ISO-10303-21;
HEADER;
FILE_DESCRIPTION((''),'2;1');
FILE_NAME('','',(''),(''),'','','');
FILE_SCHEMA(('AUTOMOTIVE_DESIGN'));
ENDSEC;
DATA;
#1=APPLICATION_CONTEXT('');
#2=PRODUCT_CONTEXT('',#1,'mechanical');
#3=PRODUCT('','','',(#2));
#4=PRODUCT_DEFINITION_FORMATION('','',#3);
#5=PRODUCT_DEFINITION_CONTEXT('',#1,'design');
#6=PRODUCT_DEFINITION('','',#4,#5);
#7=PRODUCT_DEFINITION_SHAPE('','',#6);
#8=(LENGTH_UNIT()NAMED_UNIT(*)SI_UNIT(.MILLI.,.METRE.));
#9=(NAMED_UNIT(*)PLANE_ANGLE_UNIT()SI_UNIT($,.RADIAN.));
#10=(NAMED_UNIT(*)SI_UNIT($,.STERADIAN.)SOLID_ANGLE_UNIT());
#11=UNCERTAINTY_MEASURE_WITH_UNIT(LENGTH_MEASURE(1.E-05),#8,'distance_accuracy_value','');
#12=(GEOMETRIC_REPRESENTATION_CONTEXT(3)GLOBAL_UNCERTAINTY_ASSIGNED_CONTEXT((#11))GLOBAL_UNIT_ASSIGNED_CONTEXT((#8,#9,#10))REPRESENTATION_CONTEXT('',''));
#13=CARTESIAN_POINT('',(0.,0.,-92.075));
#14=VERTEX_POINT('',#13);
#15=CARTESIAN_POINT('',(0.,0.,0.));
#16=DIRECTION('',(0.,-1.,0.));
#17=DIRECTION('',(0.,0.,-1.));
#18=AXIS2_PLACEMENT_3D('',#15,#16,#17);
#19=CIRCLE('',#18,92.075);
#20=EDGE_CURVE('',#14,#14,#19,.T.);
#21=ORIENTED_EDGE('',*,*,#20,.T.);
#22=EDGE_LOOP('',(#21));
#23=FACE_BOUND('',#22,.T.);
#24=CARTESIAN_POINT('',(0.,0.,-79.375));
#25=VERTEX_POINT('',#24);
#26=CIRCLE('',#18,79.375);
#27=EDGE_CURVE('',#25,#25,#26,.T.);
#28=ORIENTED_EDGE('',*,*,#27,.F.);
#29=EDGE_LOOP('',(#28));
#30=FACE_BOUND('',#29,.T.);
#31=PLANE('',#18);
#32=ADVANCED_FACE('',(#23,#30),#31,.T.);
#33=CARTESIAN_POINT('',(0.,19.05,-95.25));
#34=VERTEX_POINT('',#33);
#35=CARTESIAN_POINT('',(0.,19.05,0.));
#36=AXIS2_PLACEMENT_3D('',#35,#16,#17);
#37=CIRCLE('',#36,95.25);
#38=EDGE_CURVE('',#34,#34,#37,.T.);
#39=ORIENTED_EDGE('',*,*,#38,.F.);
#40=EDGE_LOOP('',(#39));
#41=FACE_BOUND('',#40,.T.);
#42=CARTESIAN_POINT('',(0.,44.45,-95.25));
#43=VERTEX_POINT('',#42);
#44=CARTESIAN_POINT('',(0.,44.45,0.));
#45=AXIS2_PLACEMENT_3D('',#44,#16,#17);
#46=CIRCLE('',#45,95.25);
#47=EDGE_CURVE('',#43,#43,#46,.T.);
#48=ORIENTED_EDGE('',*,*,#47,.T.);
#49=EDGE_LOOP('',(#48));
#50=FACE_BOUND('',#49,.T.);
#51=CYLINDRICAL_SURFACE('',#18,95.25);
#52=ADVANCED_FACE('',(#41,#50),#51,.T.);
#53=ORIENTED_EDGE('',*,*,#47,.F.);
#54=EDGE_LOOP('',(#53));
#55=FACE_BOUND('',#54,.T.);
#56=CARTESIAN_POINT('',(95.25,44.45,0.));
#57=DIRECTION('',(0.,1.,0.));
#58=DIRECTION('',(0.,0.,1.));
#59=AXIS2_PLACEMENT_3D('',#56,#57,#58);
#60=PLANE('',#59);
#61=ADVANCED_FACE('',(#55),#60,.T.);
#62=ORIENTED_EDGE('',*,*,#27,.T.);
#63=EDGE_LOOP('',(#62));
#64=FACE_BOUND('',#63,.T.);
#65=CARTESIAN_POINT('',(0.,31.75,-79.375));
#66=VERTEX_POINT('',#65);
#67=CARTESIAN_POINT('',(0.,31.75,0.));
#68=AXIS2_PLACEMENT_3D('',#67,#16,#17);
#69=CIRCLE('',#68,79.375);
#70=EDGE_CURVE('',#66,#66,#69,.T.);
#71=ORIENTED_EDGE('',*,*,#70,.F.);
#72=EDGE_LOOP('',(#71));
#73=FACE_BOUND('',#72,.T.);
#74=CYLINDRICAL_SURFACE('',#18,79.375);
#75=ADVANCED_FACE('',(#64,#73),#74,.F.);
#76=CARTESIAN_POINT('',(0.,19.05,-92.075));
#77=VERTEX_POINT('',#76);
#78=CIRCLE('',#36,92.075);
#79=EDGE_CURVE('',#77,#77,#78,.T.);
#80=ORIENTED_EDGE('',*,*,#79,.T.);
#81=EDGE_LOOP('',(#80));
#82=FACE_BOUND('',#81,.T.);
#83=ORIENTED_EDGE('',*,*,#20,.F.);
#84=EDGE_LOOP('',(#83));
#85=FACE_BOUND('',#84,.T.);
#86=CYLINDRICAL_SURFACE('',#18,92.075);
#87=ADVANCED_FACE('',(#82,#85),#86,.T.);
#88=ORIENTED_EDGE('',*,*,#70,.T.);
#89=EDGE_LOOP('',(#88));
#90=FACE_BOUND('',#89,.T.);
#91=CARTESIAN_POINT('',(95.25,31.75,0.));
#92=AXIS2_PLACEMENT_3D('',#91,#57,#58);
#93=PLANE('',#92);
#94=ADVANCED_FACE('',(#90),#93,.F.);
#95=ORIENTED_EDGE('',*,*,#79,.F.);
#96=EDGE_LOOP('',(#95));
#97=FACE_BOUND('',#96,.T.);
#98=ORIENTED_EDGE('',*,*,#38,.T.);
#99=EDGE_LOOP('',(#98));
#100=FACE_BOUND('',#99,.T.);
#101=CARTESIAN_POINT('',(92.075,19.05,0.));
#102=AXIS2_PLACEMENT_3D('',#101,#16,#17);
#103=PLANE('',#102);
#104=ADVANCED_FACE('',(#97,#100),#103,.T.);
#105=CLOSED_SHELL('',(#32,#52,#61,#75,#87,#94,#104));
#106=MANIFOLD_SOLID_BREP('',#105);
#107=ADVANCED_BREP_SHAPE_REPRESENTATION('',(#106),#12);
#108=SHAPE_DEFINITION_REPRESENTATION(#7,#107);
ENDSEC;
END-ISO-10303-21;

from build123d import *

# Parameters (mm, degrees)
SHELL1_OUTLINE_R = 79.375
SHELL1_DEPTH     = 31.75


# Read off the part's stored shape, not the designer's step: Shell1
with BuildPart() as part:
    # Sketch1 → Revolve1 (revolve)
    with BuildSketch(Plane.XY, mode=Mode.PRIVATE) as revolve1_sk:
        Polygon((0, 0), (92.075, 0), (92.075, 19.05), (95.25, 19.05), (95.25, 44.45), (0, 44.45), align=None)
    revolve(revolve1_sk.sketch.rotate(Axis((0, 0, 0), (0, 1, 0)), 90), axis=Axis((0, 0, 0), (0, 1, 0)))

    # Shell1 outline → Shell1 (cut)
    with BuildSketch(Plane(origin=(0, 0, 0), x_dir=(1, 0, 0), z_dir=(0, 1, 0))):
        Circle(SHELL1_OUTLINE_R)
    extrude(amount=SHELL1_DEPTH, mode=Mode.SUBTRACT)


solid = part.part
